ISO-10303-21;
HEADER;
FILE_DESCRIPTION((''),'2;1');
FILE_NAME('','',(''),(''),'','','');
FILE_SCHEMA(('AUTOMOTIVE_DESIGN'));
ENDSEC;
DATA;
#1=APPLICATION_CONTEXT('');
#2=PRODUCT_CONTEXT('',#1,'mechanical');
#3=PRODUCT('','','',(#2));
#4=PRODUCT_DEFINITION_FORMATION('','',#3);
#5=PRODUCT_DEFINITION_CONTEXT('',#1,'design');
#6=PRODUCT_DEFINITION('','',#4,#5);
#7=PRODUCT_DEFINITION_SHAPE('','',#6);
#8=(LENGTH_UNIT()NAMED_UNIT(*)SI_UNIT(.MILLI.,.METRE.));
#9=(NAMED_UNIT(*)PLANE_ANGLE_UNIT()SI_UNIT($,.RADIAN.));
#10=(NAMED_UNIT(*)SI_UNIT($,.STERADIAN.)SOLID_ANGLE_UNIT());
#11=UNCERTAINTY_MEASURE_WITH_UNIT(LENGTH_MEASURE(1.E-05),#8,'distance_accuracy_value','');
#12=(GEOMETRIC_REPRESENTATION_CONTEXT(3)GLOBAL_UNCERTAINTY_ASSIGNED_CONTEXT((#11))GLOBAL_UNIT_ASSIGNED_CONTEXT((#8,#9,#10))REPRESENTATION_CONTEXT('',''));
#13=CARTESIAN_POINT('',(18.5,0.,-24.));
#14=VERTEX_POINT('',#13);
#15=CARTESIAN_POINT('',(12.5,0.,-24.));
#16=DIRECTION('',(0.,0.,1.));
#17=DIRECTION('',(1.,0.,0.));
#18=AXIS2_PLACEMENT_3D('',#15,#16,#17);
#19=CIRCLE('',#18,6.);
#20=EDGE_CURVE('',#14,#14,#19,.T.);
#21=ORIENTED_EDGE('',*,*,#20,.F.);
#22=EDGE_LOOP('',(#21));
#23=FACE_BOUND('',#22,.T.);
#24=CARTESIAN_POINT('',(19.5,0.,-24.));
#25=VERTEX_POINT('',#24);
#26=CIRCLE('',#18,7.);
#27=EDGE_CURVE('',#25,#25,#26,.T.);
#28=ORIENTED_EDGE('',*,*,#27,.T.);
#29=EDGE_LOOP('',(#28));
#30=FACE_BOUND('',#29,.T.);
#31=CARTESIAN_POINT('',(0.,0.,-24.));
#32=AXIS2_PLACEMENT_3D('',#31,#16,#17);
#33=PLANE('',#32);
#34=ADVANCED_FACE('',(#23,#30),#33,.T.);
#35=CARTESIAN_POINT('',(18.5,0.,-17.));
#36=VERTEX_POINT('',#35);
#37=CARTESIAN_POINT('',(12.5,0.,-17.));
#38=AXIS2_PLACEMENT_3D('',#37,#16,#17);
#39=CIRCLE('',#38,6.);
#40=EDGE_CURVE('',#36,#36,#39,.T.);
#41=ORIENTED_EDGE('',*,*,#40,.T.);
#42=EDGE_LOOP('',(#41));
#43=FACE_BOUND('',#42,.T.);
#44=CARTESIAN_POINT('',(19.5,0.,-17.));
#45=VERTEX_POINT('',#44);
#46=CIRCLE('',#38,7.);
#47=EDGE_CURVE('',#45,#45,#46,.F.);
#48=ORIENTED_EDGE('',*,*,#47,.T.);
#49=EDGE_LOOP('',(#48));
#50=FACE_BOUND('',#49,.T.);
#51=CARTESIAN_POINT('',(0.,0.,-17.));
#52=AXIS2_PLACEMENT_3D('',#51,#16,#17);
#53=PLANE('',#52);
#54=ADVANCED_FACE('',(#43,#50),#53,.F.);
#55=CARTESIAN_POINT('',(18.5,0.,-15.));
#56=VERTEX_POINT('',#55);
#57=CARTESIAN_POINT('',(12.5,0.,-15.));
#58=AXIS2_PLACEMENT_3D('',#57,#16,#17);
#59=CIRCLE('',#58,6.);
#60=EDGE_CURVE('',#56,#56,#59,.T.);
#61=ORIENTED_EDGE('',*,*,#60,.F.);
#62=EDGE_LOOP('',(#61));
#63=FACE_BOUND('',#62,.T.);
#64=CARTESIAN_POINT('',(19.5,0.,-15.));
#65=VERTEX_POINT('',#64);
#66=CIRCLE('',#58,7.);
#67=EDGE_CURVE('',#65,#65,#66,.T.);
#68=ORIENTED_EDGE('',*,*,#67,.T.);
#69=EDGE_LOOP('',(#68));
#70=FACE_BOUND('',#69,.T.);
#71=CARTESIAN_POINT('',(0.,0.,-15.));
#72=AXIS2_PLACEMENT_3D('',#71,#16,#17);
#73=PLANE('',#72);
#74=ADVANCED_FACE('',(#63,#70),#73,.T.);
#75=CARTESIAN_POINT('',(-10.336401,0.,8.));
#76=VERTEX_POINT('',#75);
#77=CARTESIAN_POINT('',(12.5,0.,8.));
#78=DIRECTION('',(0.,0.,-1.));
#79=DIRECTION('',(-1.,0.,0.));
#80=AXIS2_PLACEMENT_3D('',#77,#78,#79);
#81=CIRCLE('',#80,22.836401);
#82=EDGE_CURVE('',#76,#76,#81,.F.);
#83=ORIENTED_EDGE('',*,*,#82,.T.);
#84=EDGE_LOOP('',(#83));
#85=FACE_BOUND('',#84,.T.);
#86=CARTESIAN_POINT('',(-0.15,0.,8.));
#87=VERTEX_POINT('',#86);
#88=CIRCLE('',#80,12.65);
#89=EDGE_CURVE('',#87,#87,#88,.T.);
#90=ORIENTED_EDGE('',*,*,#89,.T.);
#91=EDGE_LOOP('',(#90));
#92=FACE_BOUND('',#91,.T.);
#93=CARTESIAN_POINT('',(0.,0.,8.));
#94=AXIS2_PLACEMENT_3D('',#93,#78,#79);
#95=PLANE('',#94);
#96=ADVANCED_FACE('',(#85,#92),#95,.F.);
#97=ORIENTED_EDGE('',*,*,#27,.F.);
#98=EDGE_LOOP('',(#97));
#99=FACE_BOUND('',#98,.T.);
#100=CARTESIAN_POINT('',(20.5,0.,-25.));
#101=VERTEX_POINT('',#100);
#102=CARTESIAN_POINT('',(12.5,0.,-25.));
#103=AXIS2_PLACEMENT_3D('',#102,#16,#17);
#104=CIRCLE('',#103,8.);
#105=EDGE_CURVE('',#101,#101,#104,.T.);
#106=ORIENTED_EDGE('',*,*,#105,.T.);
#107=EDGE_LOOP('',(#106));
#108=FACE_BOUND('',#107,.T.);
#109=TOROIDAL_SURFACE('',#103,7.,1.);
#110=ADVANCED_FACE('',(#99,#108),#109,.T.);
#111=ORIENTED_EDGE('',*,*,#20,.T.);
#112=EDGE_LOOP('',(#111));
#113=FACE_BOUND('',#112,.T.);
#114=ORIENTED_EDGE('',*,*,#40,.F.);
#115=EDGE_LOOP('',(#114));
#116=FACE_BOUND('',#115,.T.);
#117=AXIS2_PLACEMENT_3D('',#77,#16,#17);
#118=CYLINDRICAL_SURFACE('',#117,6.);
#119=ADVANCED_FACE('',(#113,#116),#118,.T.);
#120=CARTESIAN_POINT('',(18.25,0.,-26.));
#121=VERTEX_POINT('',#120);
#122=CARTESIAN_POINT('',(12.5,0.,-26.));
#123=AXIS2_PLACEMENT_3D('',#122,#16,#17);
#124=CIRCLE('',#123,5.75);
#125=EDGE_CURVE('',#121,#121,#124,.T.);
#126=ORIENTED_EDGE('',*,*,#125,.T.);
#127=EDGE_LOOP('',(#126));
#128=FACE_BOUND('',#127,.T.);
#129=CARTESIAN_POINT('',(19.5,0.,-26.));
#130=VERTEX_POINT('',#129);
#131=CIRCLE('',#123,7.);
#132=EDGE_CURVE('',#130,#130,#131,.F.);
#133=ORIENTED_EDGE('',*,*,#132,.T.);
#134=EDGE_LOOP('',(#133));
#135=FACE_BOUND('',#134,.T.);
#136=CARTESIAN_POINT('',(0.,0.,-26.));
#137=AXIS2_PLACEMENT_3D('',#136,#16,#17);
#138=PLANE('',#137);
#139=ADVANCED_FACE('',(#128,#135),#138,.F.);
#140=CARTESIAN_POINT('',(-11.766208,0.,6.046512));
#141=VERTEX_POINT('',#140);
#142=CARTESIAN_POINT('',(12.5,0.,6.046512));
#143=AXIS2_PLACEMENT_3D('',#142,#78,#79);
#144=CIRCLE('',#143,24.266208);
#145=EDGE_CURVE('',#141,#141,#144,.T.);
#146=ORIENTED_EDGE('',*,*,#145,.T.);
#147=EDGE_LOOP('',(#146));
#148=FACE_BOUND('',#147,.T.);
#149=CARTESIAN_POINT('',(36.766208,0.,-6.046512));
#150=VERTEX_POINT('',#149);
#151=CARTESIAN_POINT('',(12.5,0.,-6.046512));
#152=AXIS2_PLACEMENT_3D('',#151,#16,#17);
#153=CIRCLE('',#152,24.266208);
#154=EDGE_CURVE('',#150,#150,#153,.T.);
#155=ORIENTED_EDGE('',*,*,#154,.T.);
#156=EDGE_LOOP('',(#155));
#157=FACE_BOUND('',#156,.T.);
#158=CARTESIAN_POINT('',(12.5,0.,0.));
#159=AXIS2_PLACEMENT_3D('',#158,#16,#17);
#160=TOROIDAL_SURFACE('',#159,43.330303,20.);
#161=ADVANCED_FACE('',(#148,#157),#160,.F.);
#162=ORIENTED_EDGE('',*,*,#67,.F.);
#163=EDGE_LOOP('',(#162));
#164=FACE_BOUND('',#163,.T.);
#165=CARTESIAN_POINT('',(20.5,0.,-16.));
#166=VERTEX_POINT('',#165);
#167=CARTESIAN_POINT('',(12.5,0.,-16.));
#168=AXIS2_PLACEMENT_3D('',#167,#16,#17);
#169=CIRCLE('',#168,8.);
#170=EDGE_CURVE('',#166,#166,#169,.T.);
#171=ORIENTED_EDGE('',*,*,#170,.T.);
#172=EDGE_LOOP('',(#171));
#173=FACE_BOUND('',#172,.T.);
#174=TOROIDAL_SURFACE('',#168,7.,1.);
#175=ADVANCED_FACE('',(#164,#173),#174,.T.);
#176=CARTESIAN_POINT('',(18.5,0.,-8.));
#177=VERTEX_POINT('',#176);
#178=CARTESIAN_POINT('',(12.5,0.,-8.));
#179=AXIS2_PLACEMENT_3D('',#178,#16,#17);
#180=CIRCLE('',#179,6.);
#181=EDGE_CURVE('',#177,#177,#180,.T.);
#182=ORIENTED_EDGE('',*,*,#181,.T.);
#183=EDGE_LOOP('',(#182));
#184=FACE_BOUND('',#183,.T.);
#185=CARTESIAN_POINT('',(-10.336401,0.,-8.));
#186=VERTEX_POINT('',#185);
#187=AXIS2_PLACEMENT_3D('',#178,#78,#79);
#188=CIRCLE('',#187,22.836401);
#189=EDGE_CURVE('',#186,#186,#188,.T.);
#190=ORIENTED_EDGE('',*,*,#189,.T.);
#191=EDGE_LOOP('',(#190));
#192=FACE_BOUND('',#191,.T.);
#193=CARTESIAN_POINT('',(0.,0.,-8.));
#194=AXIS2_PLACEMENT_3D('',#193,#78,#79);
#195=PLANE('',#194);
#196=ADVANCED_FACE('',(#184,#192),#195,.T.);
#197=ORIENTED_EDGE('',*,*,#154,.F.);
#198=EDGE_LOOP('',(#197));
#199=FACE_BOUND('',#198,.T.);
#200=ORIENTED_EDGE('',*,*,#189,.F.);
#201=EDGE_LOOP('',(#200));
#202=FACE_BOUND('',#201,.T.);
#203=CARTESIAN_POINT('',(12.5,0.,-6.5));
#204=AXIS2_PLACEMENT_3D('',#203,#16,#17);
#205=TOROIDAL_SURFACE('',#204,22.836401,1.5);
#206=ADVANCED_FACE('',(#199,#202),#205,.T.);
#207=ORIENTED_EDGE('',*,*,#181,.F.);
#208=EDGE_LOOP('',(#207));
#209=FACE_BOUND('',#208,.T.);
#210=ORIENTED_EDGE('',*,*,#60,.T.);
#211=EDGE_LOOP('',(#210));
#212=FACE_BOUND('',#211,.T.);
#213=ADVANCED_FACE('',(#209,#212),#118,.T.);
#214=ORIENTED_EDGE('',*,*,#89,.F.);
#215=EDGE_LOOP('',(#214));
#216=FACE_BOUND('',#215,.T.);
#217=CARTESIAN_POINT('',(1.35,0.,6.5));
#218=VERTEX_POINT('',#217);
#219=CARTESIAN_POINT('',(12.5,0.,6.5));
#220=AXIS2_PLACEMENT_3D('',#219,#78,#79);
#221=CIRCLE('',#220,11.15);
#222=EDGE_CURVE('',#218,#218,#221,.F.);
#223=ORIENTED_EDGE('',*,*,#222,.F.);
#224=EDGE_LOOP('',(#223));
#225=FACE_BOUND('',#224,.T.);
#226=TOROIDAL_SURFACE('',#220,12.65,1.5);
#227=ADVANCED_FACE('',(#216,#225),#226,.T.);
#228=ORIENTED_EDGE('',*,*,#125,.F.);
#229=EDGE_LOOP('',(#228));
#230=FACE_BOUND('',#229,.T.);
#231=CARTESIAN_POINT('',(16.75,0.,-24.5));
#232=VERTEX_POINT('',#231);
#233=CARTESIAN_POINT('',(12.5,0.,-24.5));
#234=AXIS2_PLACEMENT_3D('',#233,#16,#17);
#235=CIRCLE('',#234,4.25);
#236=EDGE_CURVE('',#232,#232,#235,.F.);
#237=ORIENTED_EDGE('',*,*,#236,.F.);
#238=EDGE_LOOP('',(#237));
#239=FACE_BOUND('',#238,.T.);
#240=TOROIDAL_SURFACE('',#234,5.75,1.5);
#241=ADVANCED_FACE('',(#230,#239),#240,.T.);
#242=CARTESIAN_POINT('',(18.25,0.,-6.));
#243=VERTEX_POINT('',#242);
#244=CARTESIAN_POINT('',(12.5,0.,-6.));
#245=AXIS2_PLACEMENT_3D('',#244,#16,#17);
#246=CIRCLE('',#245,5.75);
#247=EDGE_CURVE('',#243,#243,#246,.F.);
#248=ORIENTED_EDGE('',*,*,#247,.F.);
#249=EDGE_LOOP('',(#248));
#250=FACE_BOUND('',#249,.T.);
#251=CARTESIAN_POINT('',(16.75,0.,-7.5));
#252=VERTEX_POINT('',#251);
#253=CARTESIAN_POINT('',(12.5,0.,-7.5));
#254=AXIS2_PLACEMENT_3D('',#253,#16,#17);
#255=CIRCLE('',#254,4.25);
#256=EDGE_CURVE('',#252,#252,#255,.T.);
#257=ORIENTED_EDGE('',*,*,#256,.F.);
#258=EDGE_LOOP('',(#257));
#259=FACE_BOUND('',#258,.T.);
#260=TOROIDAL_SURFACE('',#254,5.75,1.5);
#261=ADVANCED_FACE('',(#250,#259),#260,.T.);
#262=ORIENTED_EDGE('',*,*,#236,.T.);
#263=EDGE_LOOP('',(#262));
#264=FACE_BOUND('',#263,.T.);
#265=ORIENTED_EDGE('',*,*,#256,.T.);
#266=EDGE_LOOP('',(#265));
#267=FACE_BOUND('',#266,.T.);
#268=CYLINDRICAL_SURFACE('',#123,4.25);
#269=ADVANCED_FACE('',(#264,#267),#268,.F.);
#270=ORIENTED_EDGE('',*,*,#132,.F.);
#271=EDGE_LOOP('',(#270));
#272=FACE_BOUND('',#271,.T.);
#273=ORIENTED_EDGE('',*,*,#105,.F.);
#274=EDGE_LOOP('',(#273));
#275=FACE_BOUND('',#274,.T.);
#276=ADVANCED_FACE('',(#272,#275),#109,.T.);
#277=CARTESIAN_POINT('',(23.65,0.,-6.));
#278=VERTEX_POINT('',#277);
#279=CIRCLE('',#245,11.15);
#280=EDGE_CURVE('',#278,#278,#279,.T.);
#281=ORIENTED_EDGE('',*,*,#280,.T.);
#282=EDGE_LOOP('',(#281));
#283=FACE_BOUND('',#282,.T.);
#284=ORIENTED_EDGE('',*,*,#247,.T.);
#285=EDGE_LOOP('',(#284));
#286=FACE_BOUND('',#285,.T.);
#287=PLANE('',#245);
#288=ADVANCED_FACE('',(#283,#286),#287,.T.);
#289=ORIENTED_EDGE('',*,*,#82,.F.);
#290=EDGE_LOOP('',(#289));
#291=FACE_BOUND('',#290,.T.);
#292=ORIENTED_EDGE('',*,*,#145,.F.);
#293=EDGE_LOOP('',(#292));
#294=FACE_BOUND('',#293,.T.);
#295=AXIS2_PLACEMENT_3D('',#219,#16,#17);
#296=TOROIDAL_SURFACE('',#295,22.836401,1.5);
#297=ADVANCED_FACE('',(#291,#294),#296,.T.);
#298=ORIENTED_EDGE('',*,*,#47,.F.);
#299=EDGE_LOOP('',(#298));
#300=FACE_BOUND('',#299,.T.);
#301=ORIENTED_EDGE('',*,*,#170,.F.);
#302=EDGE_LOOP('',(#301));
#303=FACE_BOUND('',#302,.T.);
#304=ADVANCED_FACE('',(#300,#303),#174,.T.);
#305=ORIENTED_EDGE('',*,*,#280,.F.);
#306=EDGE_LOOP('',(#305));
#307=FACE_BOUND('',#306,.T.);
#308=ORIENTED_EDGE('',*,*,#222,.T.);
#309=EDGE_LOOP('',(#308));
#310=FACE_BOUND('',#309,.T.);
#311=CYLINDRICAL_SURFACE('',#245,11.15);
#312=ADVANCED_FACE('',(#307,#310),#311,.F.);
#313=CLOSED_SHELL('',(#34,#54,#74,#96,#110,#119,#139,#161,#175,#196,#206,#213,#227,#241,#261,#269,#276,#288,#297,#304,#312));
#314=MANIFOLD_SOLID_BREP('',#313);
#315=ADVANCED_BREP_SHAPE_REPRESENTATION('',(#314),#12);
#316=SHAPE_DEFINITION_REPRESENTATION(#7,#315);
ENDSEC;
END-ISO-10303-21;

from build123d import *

# Parameters (mm, degrees)
SKETCH2_W          = 6
SKETCH2_H          = 7
SKETCH3_R          = 11.15
CUT_EXTRUDE1_DEPTH = 14
SKETCH8_R          = 4.25
CUT_EXTRUDE3_DEPTH = 50.307707308
FILLET1_R          = 1.5
FILLET2_R          = 1.5
FILLET3_R          = 1
FILLET4_R          = 1.5


with BuildPart() as part:
    # Sketch2 → Revolve1 (revolve)
    with BuildSketch(Plane(origin=(0, 0, 0), x_dir=(1, 0, 0), z_dir=(0, 1, 0)), mode=Mode.PRIVATE) as revolve1_sk:
        with BuildLine():
            Line((-12.5, 8), (12.5, 8))
            Line((12.5, 8), (12.5, -8))
            Line((12.5, -8), (-12.5, -8))
            ThreePointArc((-12.5, -8), (-10.83030278, 0), (-12.5, 8))
        make_face()
        with Locations((9.5, 11.5)):
            Rectangle(SKETCH2_W, SKETCH2_H)
        Polygon((6.5, 15), (12.5, 15), (12.5, 17), (6.5, 17), (4.5, 17), (4.5, 15), align=None)
        with Locations((9.5, 20.5)):
            Rectangle(SKETCH2_W, SKETCH2_H)
        Polygon((6.5, 24), (12.5, 24), (12.5, 26), (4.5, 26), (4.5, 24), align=None)
    revolve(revolve1_sk.sketch.rotate(Axis((12.5, 0, 8), (0, 0, -1)), 180), axis=Axis((12.5, 0, 8), (0, 0, -1)))

    # Sketch3 → Cut-Extrude1 (cut)
    with BuildSketch(Plane.XY.offset(8)):
        with Locations((12.5, 0)):
            Circle(SKETCH3_R)
    extrude(amount=-CUT_EXTRUDE1_DEPTH, mode=Mode.SUBTRACT)

    # Sketch8 → Cut-Extrude3 (cut, through all)
    with BuildSketch(Plane.XY.offset(-6)):
        with Locations((12.5, 0)):
            Circle(SKETCH8_R)
    extrude(amount=-CUT_EXTRUDE3_DEPTH, mode=Mode.SUBTRACT)

    # Fillet1
    fillet1_edges = [part.edges().sort_by_distance(p)[0] for p in [
        (8.25, 0, -6),
    ]]
    fillet(fillet1_edges, radius=FILLET1_R)

    # Fillet2
    fillet2_edges = [part.edges().sort_by_distance(p)[0] for p in [
        (-12.5, 0, 8),
        (-12.5, 0, -8),
        (1.35, 0, 8),
    ]]
    fillet(fillet2_edges, radius=FILLET2_R)

    # Fillet3
    fillet3_edges = [part.edges().sort_by_distance(p)[0] for p in [
        (4.5, 0, -15),
        (4.5, 0, -17),
        (4.5, 0, -24),
        (4.5, 0, -26),
    ]]
    fillet(fillet3_edges, radius=FILLET3_R - 0.0001)  # a hair under: the kernel refuses the full size

    # Fillet4
    fillet4_edges = [part.edges().sort_by_distance(p)[0] for p in [
        (8.25, 0, -26),
    ]]
    fillet(fillet4_edges, radius=FILLET4_R)


solid = part.part
